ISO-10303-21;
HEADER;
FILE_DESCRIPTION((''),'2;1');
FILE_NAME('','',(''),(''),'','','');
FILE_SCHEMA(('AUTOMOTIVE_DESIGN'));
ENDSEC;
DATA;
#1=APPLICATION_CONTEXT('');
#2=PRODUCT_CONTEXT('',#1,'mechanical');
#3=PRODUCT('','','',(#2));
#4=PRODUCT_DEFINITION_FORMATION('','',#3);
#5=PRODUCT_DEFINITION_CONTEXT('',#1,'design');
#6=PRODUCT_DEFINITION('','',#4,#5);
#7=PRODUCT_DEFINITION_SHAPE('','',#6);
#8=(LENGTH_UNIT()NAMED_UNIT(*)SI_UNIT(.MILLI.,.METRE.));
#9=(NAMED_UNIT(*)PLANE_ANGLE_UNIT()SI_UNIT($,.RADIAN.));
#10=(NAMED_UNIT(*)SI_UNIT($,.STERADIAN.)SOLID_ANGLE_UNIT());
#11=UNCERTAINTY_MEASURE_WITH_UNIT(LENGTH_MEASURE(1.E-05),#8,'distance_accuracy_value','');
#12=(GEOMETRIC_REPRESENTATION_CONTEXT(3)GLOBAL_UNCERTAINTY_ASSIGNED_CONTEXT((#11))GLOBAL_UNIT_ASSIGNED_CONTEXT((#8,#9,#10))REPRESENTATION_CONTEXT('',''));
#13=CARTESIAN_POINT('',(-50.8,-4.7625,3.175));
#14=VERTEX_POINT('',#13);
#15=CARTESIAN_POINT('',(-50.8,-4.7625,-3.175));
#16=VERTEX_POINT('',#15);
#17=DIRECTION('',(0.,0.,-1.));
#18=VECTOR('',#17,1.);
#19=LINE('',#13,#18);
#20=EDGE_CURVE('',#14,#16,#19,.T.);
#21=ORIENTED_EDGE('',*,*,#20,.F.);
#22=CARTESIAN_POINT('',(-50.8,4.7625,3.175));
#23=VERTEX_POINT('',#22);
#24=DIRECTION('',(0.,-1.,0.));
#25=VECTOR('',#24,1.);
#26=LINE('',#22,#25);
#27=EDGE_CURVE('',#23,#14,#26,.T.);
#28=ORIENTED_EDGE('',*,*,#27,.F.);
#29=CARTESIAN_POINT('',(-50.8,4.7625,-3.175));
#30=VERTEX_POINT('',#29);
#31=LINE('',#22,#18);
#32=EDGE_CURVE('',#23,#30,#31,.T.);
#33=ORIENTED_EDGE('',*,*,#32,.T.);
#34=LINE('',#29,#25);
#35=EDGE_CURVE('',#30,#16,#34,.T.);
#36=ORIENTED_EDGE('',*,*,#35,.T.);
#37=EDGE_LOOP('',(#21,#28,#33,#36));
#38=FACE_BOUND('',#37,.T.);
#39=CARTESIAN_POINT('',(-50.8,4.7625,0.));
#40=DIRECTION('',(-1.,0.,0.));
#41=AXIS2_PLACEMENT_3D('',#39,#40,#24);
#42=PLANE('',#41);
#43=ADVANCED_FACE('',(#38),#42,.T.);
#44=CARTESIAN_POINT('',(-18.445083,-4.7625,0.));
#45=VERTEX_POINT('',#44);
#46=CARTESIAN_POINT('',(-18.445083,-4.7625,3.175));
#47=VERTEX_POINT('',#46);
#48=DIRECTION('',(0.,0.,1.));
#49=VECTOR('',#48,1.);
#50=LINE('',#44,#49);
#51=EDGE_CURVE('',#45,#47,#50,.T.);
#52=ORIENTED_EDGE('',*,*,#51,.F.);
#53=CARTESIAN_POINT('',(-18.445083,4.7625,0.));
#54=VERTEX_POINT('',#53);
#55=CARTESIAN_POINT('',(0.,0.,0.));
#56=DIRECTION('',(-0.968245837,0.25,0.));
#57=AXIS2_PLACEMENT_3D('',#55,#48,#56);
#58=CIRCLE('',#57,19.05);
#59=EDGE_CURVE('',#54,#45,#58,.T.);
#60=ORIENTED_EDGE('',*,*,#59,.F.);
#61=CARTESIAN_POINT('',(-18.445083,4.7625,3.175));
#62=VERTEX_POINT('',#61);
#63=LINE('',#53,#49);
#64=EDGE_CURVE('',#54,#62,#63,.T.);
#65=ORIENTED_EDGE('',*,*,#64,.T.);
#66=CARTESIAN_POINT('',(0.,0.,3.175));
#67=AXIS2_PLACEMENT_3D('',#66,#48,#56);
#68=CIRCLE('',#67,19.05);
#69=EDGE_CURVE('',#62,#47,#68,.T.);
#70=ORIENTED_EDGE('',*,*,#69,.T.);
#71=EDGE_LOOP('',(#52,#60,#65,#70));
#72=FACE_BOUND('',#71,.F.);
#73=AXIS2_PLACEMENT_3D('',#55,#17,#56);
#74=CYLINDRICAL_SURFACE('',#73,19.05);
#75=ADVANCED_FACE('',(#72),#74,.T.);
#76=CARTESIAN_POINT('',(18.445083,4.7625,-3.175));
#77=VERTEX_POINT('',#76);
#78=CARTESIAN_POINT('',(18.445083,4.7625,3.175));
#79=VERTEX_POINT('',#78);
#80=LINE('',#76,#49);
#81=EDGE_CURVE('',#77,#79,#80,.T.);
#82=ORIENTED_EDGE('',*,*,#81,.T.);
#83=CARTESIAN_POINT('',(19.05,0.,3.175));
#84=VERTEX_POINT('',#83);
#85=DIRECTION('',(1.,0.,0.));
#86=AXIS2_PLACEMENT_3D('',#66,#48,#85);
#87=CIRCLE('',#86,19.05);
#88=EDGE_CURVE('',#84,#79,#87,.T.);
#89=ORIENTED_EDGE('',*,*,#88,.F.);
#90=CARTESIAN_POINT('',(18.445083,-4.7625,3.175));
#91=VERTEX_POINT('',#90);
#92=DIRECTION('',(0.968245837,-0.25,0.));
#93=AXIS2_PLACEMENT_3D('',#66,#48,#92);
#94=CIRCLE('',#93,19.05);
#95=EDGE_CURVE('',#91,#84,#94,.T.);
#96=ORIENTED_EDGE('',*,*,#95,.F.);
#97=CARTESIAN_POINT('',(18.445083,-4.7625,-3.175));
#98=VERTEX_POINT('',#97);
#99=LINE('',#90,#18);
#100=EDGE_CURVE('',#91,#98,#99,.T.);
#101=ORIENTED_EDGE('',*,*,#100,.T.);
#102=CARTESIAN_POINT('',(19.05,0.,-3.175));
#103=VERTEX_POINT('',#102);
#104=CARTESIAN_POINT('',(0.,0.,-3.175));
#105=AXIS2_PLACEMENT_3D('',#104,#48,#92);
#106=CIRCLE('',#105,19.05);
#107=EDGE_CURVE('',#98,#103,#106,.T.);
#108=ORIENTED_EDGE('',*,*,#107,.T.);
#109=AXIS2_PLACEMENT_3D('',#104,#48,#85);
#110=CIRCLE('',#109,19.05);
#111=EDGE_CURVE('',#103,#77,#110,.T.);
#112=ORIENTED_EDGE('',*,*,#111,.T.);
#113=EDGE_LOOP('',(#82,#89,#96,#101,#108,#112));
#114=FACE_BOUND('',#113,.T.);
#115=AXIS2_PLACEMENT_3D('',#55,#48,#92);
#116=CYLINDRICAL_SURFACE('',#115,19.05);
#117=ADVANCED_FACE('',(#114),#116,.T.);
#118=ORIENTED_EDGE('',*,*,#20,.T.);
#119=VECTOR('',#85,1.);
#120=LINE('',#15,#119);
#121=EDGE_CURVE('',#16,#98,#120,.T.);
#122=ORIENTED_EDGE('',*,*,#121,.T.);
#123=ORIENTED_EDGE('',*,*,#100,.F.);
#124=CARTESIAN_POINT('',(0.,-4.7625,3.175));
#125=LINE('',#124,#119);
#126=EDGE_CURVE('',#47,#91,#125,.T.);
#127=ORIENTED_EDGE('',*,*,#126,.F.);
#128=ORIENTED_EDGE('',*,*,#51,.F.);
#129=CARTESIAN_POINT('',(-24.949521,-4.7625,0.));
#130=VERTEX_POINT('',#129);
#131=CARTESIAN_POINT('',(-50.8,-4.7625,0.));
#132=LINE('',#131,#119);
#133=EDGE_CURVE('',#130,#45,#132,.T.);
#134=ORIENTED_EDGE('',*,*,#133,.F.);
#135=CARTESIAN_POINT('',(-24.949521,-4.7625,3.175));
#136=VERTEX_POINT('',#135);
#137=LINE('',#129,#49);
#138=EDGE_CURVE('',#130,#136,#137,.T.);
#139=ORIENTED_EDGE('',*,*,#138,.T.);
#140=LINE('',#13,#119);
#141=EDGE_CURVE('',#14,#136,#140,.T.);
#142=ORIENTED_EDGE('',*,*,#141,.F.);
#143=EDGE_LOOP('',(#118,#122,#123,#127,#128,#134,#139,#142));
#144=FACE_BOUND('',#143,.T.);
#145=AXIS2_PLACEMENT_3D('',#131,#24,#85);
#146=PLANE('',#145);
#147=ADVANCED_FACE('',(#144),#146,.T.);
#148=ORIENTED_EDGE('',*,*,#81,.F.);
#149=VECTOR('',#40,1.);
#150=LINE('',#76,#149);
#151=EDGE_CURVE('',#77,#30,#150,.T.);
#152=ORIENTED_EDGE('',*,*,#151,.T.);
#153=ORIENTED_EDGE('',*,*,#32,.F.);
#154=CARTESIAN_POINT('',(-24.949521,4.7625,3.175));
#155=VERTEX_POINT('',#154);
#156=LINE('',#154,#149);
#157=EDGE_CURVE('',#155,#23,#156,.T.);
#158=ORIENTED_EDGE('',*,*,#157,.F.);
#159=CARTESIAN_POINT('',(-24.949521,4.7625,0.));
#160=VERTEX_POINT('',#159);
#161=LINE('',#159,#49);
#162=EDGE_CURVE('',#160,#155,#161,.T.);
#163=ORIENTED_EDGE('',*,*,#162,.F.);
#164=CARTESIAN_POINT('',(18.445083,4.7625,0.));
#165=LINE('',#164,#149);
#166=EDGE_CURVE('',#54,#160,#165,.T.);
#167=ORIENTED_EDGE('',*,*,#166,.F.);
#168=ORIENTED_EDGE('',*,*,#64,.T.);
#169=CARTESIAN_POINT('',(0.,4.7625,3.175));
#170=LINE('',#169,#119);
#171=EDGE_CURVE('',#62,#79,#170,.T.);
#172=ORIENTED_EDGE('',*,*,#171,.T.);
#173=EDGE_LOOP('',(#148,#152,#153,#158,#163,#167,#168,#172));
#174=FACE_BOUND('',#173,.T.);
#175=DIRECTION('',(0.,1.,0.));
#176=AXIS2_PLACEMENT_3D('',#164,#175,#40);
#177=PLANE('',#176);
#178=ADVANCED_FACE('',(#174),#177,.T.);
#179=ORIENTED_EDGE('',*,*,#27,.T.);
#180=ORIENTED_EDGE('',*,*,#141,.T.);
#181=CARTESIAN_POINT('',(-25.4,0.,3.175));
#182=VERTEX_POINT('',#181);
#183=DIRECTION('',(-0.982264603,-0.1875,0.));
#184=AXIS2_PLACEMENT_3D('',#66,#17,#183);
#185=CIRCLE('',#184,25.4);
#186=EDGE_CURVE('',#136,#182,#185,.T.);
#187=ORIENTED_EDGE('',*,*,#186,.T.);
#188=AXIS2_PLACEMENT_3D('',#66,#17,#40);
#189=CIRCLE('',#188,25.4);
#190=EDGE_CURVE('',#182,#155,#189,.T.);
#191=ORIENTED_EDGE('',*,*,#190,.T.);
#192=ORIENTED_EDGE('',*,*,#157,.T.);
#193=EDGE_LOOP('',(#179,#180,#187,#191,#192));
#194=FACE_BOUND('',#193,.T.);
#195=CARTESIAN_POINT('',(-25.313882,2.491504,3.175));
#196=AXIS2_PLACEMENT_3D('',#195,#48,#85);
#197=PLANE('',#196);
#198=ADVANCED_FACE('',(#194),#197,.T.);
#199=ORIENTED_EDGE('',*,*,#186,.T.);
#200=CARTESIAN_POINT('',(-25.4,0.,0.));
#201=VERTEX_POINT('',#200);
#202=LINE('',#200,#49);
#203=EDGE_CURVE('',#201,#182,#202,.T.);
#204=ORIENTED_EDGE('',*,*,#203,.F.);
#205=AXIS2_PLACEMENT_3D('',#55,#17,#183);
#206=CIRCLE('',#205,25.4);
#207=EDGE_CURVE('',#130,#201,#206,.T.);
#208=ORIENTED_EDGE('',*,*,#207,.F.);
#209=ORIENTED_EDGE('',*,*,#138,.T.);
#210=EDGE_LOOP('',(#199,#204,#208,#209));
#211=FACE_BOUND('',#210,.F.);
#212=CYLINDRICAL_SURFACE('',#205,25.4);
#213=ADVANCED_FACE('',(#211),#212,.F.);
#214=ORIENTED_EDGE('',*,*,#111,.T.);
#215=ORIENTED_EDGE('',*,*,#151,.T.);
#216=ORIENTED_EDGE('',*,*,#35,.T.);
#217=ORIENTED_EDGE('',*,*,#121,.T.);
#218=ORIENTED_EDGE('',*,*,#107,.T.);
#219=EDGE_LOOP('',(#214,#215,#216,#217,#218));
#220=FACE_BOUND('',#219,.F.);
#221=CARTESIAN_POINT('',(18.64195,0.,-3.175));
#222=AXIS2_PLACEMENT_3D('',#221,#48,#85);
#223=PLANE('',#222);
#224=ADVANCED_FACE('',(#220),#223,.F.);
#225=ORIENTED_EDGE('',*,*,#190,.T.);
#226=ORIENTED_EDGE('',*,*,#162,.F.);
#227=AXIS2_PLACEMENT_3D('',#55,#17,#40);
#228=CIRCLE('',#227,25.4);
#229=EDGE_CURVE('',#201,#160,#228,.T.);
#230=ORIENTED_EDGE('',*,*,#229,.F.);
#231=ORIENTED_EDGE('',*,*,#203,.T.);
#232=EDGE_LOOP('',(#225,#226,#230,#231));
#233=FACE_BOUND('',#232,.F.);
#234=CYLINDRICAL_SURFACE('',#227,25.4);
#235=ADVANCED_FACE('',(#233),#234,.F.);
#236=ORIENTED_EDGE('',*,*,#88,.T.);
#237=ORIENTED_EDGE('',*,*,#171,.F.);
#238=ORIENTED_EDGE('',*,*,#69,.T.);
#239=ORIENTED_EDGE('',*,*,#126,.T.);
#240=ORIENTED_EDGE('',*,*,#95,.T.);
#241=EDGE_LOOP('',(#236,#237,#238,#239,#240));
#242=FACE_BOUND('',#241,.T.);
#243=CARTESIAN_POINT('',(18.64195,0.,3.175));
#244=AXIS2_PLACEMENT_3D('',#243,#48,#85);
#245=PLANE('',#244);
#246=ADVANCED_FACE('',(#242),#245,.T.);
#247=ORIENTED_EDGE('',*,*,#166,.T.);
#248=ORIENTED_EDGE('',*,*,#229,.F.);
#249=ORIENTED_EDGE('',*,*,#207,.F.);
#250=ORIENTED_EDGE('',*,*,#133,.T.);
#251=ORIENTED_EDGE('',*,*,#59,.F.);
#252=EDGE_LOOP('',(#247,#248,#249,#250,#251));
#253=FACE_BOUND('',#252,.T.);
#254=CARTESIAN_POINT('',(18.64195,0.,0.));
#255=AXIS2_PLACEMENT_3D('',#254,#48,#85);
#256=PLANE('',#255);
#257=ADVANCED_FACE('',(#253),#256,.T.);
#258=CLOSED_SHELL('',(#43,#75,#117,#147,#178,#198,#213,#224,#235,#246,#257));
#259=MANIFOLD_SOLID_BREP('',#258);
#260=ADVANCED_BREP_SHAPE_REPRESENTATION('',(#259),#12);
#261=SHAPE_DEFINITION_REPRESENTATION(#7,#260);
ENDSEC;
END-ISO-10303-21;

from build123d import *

# Parameters (mm, degrees)
F0_W     = 36.8901663726
F0_H     = 9.525
F1_DEPTH = 3.175
F2_DEPTH = 3.175


with BuildPart() as f1:
    # F0 (on Top) → F1 (new body)
    with BuildSketch(Plane.XY):
        with BuildLine():
            ThreePointArc((18.4450831863, -4.7625), (18.8981657139, -2.4003817718), (19.05, 0))
            ThreePointArc((19.05, 0), (18.8981657139, 2.4003817718), (18.4450831863, 4.7625))
            Line((18.4450831863, 4.7625), (18.4450831863, -4.7625))
        make_face()
        Rectangle(F0_W, F0_H)
        with BuildLine():
            Line((-18.4450831863, -4.7625), (-18.4450831863, 4.7625))
            ThreePointArc((-18.4450831863, 4.7625), (-19.05, 0), (-18.4450831863, -4.7625))
        make_face()
    extrude(amount=F1_DEPTH)



with BuildPart() as f1b:
    # F0 (on Top) → F1, piece 2 (new body)
    with BuildSketch(Plane.XY):
        with BuildLine():
            ThreePointArc((-25.4, 0), (-25.2871294453, 2.3918788461), (-24.9495209122, 4.7625))
            Line((-24.9495209122, 4.7625), (-25.4, 4.7625))
            Line((-25.4, 4.7625), (-25.4, 0))
        make_face()
        with BuildLine():
            Line((-25.4, -4.7625), (-24.9495209122, -4.7625))
            ThreePointArc((-24.9495209122, -4.7625), (-25.2871294453, -2.3918788461), (-25.4, 0))
            Line((-25.4, 0), (-25.4, -4.7625))
        make_face()
        Polygon((-25.4, 0), (-25.4, 4.7625), (-50.8, 4.7625), (-50.8, -4.7625), (-25.4, -4.7625), align=None)
    extrude(amount=F1_DEPTH)


with BuildPart() as f1_1:
    add(f1.part)

    add(f1b.part)  # F2 merges F1b
    # F0 (on Top) → F2 (join)
    with BuildSketch(Plane.XY):
        with BuildLine():
            ThreePointArc((18.4450831863, -4.7625), (18.8981657139, -2.4003817718), (19.05, 0))
            ThreePointArc((19.05, 0), (18.8981657139, 2.4003817718), (18.4450831863, 4.7625))
            Line((18.4450831863, 4.7625), (18.4450831863, -4.7625))
        make_face()
        Rectangle(F0_W, F0_H)
        with BuildLine():
            Line((-18.4450831863, -4.7625), (-18.4450831863, 4.7625))
            ThreePointArc((-18.4450831863, 4.7625), (-19.05, 0), (-18.4450831863, -4.7625))
        make_face()
        with BuildLine():
            ThreePointArc((-18.4450831863, -4.7625), (-19.05, 0), (-18.4450831863, 4.7625))
            Line((-18.4450831863, 4.7625), (-24.9495209122, 4.7625))
            ThreePointArc((-24.9495209122, 4.7625), (-25.2871294453, 2.3918788461), (-25.4, 0))
            ThreePointArc((-25.4, 0), (-25.2871294453, -2.3918788461), (-24.9495209122, -4.7625))
            Line((-24.9495209122, -4.7625), (-18.4450831863, -4.7625))
        make_face()
        with BuildLine():
            ThreePointArc((-25.4, 0), (-25.2871294453, 2.3918788461), (-24.9495209122, 4.7625))
            Line((-24.9495209122, 4.7625), (-25.4, 4.7625))
            Line((-25.4, 4.7625), (-25.4, 0))
        make_face()
        with BuildLine():
            Line((-25.4, -4.7625), (-24.9495209122, -4.7625))
            ThreePointArc((-24.9495209122, -4.7625), (-25.2871294453, -2.3918788461), (-25.4, 0))
            Line((-25.4, 0), (-25.4, -4.7625))
        make_face()
        Polygon((-25.4, 0), (-25.4, 4.7625), (-50.8, 4.7625), (-50.8, -4.7625), (-25.4, -4.7625), align=None)
    extrude(amount=-F2_DEPTH)


solid = f1_1.part
